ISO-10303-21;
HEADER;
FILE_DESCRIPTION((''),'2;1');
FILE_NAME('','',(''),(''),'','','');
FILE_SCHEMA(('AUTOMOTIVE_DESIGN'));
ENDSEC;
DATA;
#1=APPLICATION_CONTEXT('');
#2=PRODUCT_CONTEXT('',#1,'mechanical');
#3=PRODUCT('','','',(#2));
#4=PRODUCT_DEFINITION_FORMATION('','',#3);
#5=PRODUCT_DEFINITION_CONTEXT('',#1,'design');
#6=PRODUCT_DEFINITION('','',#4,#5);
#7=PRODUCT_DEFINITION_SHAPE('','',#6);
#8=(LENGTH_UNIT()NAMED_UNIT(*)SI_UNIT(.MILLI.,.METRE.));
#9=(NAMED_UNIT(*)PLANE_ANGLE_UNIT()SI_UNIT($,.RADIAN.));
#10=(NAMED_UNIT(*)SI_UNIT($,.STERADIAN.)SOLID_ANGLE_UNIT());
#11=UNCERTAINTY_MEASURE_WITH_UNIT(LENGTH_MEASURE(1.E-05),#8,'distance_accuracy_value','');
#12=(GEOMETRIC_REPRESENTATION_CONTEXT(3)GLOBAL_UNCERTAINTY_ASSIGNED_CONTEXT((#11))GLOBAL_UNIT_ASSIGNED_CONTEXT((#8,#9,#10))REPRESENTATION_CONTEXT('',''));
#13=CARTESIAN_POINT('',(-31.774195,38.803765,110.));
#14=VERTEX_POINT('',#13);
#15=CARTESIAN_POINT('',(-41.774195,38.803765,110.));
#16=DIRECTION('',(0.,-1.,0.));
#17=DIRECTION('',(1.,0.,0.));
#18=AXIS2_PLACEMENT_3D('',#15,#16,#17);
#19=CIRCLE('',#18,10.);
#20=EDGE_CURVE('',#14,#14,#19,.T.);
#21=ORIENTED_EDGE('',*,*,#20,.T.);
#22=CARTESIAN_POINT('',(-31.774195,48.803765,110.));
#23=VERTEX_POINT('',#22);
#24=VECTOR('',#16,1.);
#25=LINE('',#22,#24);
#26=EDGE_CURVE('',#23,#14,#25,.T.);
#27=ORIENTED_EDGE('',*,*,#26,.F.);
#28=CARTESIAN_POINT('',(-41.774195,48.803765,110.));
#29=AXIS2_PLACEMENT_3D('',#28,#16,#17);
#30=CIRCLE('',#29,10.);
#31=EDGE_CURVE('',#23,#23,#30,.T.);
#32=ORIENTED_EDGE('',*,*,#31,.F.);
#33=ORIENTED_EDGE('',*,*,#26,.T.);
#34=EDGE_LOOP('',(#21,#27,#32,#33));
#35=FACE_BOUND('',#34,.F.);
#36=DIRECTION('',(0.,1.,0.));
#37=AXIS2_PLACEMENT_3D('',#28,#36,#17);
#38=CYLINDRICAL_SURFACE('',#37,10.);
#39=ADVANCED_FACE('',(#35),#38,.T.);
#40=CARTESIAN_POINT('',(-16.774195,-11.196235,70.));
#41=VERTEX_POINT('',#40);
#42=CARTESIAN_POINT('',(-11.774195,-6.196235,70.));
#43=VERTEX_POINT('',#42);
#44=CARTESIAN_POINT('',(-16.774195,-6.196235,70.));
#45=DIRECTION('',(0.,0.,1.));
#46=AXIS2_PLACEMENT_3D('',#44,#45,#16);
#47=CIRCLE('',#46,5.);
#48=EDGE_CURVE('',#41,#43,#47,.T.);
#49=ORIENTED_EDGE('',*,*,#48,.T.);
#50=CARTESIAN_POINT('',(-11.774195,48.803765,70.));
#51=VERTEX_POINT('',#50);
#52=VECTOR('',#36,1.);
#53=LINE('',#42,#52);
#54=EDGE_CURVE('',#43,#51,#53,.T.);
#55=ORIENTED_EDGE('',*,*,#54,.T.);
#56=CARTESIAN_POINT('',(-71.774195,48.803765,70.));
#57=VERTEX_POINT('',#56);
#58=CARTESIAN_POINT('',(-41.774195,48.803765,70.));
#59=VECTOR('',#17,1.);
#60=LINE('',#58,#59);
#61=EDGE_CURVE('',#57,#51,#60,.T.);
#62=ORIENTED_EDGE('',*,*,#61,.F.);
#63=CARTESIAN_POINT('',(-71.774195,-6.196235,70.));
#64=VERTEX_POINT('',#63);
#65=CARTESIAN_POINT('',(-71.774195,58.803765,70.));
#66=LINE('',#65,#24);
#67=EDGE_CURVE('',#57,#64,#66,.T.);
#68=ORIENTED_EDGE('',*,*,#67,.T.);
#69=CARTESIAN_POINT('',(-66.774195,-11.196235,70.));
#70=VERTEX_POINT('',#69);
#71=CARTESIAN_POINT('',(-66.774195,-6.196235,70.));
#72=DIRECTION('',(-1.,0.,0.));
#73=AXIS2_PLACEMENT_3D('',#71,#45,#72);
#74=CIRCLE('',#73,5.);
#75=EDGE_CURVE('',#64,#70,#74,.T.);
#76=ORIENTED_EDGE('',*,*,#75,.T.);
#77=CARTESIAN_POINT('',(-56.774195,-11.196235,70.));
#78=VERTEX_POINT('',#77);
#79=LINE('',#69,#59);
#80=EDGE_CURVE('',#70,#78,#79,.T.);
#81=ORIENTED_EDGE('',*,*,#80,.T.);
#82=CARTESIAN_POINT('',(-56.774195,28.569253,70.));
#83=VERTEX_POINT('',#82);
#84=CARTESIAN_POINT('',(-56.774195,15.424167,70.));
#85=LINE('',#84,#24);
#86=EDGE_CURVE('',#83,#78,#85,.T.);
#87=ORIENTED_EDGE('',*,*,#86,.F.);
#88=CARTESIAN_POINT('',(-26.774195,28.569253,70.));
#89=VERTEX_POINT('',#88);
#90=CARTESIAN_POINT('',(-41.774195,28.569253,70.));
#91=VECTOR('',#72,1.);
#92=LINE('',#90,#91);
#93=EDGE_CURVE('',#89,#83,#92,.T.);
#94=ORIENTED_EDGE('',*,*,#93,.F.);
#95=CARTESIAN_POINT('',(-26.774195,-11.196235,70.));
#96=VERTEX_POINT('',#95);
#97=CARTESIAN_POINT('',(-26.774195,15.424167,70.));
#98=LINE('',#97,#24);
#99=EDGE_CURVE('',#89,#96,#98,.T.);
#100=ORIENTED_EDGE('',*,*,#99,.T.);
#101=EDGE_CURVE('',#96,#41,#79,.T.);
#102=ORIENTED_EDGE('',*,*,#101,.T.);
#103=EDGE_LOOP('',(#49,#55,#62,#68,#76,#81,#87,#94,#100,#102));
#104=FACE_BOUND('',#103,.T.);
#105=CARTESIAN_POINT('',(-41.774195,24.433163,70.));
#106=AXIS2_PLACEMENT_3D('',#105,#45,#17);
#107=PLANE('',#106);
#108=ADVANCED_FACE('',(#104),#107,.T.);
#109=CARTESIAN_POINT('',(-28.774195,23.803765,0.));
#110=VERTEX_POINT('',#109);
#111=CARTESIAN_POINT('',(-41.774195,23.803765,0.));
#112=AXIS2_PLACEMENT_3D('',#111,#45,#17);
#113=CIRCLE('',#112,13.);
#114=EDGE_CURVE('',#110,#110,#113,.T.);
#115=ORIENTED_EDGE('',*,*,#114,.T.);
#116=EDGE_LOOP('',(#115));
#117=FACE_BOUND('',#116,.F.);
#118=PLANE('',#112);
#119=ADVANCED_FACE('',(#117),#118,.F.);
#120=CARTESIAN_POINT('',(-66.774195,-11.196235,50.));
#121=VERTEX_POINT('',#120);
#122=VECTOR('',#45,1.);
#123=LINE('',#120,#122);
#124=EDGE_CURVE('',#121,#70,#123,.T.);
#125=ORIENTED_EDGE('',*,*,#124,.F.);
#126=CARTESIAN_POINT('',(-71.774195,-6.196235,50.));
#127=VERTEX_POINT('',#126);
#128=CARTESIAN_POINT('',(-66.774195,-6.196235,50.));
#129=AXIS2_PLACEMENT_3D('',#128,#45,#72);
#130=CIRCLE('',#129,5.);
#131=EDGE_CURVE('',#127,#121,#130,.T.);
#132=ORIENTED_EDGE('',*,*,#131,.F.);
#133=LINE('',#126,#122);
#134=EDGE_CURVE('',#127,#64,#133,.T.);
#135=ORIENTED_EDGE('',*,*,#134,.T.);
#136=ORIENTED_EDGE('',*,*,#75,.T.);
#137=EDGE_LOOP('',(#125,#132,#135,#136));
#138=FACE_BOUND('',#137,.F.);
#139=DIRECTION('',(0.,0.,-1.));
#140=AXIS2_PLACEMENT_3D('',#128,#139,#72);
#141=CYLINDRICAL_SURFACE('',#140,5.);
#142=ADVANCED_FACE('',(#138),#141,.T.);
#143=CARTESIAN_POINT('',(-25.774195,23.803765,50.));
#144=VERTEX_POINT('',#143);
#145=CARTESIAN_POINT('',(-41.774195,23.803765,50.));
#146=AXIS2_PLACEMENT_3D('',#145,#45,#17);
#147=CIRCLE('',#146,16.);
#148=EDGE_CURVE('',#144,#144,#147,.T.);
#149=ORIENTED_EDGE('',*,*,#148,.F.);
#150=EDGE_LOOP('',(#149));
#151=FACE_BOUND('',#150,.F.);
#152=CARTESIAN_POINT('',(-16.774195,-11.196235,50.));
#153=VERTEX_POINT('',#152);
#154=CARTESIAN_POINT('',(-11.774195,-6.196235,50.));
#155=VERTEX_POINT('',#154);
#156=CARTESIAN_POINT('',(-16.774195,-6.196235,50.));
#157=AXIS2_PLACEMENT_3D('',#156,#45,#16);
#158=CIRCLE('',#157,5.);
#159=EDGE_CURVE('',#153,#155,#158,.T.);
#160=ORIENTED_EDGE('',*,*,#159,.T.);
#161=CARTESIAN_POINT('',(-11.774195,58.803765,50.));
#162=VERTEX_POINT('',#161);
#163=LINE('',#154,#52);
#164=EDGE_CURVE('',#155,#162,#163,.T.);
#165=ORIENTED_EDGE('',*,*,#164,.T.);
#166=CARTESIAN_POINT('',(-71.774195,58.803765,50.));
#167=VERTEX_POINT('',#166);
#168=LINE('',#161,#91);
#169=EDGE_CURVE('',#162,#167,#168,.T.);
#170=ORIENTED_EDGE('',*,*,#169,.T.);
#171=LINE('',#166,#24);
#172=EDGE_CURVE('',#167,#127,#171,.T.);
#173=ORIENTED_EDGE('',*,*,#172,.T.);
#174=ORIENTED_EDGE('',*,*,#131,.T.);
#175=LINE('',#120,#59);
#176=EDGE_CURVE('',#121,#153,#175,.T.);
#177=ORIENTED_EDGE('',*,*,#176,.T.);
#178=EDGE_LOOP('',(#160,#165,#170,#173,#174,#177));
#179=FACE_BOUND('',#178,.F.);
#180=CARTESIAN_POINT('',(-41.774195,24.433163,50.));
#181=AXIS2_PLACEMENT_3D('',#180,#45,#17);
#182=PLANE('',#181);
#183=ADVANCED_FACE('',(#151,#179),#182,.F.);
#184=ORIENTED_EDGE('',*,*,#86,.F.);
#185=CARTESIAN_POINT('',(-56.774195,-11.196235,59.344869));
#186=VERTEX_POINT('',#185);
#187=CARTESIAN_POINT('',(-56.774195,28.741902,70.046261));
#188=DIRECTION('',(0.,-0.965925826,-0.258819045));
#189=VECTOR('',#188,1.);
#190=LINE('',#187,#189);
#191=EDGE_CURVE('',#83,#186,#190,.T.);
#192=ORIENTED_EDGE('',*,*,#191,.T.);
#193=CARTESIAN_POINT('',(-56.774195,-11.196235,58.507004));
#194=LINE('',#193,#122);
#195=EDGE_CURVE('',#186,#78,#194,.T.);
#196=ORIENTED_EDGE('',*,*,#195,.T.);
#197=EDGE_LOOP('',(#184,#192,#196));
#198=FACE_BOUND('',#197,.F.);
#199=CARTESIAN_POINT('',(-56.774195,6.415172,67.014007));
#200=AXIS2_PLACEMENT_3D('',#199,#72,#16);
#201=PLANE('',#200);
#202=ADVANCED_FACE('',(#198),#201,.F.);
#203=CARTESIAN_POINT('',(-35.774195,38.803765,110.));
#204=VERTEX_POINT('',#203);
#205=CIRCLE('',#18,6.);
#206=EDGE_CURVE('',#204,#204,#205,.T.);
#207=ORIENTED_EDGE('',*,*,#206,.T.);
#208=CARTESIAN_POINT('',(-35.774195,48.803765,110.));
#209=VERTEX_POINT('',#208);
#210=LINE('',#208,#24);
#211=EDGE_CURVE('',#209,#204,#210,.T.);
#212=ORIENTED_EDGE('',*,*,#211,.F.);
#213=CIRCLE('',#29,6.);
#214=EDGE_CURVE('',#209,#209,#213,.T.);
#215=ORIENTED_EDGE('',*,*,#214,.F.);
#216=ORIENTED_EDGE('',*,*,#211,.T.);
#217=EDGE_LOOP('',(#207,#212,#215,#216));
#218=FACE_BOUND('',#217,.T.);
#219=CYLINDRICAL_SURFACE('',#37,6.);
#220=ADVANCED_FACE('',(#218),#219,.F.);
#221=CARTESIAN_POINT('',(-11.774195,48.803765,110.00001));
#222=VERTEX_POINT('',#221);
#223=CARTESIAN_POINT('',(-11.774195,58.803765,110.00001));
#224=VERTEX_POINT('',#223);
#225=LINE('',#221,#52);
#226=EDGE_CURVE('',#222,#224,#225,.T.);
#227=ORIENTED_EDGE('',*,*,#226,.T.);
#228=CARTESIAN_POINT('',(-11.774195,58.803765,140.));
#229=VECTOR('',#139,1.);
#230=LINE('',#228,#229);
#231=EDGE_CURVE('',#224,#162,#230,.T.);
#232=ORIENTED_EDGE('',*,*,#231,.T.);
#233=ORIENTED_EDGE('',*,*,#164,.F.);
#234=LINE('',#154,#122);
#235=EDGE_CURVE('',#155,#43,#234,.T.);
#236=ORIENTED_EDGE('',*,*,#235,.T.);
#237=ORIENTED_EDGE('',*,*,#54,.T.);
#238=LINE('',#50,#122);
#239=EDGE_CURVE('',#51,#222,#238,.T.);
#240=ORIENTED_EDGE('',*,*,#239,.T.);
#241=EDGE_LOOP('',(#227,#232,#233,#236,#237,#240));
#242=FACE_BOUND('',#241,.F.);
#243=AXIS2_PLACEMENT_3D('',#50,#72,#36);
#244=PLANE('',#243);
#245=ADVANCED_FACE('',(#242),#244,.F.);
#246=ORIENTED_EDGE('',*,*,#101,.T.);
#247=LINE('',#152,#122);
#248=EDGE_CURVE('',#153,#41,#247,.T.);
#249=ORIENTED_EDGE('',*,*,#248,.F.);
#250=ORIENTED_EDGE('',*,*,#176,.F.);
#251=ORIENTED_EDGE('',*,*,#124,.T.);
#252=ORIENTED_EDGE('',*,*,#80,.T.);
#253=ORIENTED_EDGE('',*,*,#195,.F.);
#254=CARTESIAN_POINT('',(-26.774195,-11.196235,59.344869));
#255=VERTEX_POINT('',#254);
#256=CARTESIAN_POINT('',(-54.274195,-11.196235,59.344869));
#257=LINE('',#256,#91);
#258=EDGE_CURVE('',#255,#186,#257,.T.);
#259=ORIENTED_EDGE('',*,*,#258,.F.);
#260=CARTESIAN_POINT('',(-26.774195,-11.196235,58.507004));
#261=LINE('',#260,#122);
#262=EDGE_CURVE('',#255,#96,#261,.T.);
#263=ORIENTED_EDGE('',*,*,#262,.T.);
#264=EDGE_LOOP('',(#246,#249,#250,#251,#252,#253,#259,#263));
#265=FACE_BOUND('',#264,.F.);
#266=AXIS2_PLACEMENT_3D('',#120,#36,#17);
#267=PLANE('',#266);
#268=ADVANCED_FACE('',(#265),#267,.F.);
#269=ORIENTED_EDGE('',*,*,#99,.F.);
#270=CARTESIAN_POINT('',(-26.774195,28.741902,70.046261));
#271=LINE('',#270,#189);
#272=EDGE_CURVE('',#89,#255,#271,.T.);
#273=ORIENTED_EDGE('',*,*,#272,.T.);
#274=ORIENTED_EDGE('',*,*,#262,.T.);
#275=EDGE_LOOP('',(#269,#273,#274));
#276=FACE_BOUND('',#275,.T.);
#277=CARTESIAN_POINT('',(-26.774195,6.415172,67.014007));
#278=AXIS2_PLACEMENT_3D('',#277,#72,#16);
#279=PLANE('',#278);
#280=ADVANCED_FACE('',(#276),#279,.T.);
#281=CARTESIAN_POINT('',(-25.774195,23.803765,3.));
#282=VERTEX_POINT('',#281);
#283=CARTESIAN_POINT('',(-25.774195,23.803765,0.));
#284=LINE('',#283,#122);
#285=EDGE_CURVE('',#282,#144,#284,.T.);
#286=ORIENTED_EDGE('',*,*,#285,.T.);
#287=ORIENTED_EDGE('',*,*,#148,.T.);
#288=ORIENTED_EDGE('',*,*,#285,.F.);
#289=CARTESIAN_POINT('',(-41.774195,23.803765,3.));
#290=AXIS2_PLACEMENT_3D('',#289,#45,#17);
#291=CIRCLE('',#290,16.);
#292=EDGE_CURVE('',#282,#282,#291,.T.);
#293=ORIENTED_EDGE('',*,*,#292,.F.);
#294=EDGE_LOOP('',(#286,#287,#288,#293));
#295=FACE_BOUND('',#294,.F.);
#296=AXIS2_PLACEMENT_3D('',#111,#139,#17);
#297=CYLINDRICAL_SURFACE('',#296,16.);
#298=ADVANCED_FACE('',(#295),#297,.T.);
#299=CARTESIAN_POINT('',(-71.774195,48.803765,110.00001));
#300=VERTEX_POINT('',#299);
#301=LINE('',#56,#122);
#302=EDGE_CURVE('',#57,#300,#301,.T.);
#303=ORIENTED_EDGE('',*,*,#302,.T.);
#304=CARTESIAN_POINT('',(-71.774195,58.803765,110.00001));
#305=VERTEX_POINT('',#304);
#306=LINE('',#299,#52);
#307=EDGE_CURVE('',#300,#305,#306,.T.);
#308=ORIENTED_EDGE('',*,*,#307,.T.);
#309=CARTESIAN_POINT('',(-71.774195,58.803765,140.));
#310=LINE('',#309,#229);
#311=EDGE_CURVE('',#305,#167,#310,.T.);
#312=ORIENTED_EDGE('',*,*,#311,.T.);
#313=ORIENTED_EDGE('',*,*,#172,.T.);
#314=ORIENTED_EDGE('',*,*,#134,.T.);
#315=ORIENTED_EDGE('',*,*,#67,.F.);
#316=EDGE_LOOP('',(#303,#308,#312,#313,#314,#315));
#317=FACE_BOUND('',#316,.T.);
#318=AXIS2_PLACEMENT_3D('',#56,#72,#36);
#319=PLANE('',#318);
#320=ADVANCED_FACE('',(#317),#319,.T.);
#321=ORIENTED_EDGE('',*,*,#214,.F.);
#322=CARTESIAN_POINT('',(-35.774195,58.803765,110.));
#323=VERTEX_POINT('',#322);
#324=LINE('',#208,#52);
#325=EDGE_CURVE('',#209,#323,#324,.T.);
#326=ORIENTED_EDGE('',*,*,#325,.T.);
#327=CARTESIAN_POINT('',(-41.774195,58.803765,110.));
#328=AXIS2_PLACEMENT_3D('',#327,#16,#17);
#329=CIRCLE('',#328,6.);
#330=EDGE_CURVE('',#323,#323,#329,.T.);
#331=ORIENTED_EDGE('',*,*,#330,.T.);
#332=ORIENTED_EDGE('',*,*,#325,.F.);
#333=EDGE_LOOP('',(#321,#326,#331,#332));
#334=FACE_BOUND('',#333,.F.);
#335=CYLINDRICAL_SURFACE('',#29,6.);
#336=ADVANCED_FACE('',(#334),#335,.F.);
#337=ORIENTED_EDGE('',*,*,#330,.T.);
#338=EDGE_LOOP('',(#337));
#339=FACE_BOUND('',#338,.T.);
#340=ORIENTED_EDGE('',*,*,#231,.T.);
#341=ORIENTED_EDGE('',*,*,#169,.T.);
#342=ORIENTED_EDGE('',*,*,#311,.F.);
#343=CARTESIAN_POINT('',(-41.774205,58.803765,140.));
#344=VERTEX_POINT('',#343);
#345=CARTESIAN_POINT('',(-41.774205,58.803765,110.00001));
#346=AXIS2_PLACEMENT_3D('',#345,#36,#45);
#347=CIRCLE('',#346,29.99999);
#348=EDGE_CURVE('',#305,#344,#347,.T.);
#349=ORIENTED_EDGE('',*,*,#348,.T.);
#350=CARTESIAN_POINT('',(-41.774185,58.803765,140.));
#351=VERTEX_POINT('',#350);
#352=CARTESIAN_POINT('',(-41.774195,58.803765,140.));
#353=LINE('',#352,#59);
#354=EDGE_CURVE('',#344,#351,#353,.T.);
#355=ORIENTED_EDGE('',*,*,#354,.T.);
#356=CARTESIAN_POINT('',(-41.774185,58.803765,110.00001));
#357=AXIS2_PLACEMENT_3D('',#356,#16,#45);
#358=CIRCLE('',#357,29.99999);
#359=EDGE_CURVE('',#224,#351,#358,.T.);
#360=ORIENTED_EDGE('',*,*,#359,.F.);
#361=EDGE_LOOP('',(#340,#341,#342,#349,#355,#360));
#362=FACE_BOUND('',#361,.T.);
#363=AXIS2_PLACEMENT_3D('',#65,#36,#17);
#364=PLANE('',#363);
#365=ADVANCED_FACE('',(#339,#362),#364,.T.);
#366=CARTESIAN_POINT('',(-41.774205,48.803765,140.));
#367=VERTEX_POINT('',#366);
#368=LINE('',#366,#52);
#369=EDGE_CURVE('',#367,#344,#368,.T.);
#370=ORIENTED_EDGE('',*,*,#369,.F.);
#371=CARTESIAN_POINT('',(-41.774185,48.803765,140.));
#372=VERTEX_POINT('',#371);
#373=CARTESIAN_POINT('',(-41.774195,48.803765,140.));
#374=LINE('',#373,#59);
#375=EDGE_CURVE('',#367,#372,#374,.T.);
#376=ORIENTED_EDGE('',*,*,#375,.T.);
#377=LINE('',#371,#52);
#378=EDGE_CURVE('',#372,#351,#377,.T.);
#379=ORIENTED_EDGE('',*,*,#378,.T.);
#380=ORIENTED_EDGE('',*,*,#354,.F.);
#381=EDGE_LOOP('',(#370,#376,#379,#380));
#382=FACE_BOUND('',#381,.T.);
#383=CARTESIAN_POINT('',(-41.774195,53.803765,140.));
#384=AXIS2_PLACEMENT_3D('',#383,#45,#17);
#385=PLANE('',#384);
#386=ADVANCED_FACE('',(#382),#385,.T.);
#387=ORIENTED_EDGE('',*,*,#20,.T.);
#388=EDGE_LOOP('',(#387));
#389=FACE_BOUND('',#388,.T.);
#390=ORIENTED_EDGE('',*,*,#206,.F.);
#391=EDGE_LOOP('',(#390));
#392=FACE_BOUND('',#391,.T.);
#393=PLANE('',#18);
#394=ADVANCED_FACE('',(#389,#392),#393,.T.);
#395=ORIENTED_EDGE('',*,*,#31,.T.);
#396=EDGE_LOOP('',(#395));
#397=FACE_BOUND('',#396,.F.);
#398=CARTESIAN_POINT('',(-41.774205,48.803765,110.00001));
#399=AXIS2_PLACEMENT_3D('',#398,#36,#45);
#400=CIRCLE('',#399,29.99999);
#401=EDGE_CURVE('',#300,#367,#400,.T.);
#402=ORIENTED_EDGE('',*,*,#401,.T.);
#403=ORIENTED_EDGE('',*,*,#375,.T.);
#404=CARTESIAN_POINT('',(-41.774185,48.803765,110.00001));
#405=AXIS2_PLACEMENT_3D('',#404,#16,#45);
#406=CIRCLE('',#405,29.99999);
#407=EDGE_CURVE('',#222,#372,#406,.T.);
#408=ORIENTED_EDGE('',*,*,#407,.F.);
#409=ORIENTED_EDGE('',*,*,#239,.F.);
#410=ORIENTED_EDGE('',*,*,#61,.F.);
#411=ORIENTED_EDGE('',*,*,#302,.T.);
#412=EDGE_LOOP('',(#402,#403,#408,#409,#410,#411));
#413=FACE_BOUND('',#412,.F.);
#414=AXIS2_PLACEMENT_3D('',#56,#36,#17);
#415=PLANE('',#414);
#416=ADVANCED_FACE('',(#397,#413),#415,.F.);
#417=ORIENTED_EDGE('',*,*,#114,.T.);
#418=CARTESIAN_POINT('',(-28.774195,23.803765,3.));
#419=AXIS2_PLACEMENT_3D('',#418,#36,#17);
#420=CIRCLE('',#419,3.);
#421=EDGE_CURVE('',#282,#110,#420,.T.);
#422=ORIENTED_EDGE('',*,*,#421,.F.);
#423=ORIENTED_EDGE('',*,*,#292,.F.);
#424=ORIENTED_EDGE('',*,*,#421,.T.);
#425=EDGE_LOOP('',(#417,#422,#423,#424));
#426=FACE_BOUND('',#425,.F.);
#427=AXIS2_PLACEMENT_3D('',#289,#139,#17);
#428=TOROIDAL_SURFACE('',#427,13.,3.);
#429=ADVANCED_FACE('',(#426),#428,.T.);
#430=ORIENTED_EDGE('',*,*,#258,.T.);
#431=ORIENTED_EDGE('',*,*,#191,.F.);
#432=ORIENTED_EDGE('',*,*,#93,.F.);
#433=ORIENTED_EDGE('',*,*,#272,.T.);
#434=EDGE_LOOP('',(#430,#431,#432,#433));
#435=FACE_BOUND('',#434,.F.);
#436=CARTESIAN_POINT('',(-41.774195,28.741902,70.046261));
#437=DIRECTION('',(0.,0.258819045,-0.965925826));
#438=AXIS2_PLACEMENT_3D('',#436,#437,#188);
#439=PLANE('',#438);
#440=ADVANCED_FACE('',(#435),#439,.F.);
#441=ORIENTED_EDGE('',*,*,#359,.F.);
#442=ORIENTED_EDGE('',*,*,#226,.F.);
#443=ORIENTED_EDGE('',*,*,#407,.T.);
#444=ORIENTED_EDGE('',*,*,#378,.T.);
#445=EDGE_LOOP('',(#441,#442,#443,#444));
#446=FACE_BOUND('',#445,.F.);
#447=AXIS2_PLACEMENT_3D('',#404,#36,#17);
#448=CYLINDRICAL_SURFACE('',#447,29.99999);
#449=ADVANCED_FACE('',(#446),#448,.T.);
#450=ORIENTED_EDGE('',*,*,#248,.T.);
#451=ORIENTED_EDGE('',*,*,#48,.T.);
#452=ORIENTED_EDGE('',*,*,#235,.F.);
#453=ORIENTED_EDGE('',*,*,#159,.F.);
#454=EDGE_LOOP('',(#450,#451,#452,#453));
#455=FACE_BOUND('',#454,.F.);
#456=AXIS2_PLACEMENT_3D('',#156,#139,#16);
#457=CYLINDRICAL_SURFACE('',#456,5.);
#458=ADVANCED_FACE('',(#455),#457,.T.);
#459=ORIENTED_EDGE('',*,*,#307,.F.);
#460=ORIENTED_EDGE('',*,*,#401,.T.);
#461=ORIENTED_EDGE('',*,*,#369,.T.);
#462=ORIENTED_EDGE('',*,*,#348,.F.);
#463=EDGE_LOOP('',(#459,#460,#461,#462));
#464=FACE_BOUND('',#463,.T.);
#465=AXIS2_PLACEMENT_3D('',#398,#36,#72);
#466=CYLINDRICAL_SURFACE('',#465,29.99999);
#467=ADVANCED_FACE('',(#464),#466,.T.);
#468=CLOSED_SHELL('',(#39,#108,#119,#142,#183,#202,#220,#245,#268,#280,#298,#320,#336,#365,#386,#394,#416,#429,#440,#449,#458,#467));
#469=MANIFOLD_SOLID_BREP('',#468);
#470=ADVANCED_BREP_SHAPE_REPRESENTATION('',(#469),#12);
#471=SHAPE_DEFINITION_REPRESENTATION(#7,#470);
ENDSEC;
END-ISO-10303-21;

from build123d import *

# Parameters (mm, degrees)
F0_R      = 16
F1_DEPTH  = 50
F2_R      = 3
F3_R      = 16
F4_DEPTH  = 20
F7_DEPTH  = 15
F8_W      = 60
F8_H      = 10
F9_DEPTH  = 70
F10_R     = 29.99999
F11_R     = 10
F11_R_2   = 6
F12_DEPTH = 10
F13_DEPTH = 10.001


# Not quite as in the source:
# - a fillet or chamfer is up to 0.001 mm smaller than in the source, because OpenCascade refuses the exact size


with BuildPart() as f1:
    # F0 (on Top) → F1 (new body)
    with BuildSketch(Plane.XY):
        with Locations((-41.7741946876, 23.8037649542)):
            Circle(F0_R)
    extrude(amount=F1_DEPTH)

    # F2
    f2_edges = [f1.edges().sort_by_distance(p)[0] for p in [
        (-57.774195, 23.803765, 0),
    ]]
    fillet(f2_edges, radius=F2_R)

    # F3 (on face) → F4 (join)
    with BuildSketch(Plane.XY.offset(50)):
        with BuildLine():
            Line((-11.7741946876, 58.8037649542), (-41.7741946876, 58.8037649542))
            Line((-41.7741946876, 58.8037649542), (-71.7741946876, 58.8037649542))
            Line((-71.7741946876, 58.8037649542), (-71.7741946876, 23.8037649542))
            Line((-71.7741946876, 23.8037649542), (-71.7741946876, -6.1962350458))
            ThreePointArc((-71.7741946876, -6.1962350458), (-70.3097285935, -9.7317689517), (-66.7741946876, -11.1962350458))
            Line((-66.7741946876, -11.1962350458), (-56.7741946876, -11.1962350458))
            Line((-56.7741946876, -11.1962350458), (-41.7741946876, -11.1962350458))
            Line((-41.7741946876, -11.1962350458), (-26.7741946876, -11.1962350458))
            Line((-26.7741946876, -11.1962350458), (-16.7741946876, -11.1962350458))
            ThreePointArc((-16.7741946876, -11.1962350458), (-13.2386607817, -9.7317689517), (-11.7741946876, -6.1962350458))
            Line((-11.7741946876, -6.1962350458), (-11.7741946876, 58.8037649542))
        make_face()
        with Locations((-41.7741946876, 23.8037649542)):
            Circle(F3_R, mode=Mode.SUBTRACT)
        with Locations((-41.7741946876, 23.8037649542)):
            Circle(F3_R)
    extrude(amount=F4_DEPTH)

    # F6 (on offset) → F7 (cut, symmetric)
    with BuildSketch(Plane(origin=(-41.7741946876, 0, 0), x_dir=(0, -1, 0), z_dir=(-1, 0, 0))):
        Polygon((11.2580982968, 59.3282932557), (11.2580982968, 70.0462609529), (-28.7419017032, 70.0462609529), align=None)
    extrude(amount=F7_DEPTH, both=True, mode=Mode.SUBTRACT)

    # F8 (on face) → F9 (join)
    with BuildSketch(Plane.XY.offset(70)):
        with Locations((-41.7741946876, 53.8037649542)):
            Rectangle(F8_W, F8_H)
    extrude(amount=F9_DEPTH)

    # F10 (radius 30 in the source; OpenCascade refuses exactly that, so slightly less here)
    f10_edges = [f1.edges().sort_by_distance(p)[0] for p in [
        (-71.774195, 53.803765, 140),
        (-11.774195, 53.803765, 140),
    ]]
    fillet(f10_edges, radius=F10_R)

    # F11 (on face) → F12 (join)
    with BuildSketch(Plane.XZ.offset(-48.8037649542)):
        with Locations((-41.7741946876, 110)):
            Circle(F11_R)
        with Locations((-41.7741946876, 110)):
            Circle(F11_R_2, mode=Mode.SUBTRACT)
    extrude(amount=F12_DEPTH)

    # F13 (cut, through all): a face of the model
    f13_faces = [f1.faces().sort_by_distance(p)[0] for p in [
        (-41.7741946876, 48.8037649542, 110),
    ]]
    extrude(f13_faces, amount=-F13_DEPTH, mode=Mode.SUBTRACT)


solid = f1.part
